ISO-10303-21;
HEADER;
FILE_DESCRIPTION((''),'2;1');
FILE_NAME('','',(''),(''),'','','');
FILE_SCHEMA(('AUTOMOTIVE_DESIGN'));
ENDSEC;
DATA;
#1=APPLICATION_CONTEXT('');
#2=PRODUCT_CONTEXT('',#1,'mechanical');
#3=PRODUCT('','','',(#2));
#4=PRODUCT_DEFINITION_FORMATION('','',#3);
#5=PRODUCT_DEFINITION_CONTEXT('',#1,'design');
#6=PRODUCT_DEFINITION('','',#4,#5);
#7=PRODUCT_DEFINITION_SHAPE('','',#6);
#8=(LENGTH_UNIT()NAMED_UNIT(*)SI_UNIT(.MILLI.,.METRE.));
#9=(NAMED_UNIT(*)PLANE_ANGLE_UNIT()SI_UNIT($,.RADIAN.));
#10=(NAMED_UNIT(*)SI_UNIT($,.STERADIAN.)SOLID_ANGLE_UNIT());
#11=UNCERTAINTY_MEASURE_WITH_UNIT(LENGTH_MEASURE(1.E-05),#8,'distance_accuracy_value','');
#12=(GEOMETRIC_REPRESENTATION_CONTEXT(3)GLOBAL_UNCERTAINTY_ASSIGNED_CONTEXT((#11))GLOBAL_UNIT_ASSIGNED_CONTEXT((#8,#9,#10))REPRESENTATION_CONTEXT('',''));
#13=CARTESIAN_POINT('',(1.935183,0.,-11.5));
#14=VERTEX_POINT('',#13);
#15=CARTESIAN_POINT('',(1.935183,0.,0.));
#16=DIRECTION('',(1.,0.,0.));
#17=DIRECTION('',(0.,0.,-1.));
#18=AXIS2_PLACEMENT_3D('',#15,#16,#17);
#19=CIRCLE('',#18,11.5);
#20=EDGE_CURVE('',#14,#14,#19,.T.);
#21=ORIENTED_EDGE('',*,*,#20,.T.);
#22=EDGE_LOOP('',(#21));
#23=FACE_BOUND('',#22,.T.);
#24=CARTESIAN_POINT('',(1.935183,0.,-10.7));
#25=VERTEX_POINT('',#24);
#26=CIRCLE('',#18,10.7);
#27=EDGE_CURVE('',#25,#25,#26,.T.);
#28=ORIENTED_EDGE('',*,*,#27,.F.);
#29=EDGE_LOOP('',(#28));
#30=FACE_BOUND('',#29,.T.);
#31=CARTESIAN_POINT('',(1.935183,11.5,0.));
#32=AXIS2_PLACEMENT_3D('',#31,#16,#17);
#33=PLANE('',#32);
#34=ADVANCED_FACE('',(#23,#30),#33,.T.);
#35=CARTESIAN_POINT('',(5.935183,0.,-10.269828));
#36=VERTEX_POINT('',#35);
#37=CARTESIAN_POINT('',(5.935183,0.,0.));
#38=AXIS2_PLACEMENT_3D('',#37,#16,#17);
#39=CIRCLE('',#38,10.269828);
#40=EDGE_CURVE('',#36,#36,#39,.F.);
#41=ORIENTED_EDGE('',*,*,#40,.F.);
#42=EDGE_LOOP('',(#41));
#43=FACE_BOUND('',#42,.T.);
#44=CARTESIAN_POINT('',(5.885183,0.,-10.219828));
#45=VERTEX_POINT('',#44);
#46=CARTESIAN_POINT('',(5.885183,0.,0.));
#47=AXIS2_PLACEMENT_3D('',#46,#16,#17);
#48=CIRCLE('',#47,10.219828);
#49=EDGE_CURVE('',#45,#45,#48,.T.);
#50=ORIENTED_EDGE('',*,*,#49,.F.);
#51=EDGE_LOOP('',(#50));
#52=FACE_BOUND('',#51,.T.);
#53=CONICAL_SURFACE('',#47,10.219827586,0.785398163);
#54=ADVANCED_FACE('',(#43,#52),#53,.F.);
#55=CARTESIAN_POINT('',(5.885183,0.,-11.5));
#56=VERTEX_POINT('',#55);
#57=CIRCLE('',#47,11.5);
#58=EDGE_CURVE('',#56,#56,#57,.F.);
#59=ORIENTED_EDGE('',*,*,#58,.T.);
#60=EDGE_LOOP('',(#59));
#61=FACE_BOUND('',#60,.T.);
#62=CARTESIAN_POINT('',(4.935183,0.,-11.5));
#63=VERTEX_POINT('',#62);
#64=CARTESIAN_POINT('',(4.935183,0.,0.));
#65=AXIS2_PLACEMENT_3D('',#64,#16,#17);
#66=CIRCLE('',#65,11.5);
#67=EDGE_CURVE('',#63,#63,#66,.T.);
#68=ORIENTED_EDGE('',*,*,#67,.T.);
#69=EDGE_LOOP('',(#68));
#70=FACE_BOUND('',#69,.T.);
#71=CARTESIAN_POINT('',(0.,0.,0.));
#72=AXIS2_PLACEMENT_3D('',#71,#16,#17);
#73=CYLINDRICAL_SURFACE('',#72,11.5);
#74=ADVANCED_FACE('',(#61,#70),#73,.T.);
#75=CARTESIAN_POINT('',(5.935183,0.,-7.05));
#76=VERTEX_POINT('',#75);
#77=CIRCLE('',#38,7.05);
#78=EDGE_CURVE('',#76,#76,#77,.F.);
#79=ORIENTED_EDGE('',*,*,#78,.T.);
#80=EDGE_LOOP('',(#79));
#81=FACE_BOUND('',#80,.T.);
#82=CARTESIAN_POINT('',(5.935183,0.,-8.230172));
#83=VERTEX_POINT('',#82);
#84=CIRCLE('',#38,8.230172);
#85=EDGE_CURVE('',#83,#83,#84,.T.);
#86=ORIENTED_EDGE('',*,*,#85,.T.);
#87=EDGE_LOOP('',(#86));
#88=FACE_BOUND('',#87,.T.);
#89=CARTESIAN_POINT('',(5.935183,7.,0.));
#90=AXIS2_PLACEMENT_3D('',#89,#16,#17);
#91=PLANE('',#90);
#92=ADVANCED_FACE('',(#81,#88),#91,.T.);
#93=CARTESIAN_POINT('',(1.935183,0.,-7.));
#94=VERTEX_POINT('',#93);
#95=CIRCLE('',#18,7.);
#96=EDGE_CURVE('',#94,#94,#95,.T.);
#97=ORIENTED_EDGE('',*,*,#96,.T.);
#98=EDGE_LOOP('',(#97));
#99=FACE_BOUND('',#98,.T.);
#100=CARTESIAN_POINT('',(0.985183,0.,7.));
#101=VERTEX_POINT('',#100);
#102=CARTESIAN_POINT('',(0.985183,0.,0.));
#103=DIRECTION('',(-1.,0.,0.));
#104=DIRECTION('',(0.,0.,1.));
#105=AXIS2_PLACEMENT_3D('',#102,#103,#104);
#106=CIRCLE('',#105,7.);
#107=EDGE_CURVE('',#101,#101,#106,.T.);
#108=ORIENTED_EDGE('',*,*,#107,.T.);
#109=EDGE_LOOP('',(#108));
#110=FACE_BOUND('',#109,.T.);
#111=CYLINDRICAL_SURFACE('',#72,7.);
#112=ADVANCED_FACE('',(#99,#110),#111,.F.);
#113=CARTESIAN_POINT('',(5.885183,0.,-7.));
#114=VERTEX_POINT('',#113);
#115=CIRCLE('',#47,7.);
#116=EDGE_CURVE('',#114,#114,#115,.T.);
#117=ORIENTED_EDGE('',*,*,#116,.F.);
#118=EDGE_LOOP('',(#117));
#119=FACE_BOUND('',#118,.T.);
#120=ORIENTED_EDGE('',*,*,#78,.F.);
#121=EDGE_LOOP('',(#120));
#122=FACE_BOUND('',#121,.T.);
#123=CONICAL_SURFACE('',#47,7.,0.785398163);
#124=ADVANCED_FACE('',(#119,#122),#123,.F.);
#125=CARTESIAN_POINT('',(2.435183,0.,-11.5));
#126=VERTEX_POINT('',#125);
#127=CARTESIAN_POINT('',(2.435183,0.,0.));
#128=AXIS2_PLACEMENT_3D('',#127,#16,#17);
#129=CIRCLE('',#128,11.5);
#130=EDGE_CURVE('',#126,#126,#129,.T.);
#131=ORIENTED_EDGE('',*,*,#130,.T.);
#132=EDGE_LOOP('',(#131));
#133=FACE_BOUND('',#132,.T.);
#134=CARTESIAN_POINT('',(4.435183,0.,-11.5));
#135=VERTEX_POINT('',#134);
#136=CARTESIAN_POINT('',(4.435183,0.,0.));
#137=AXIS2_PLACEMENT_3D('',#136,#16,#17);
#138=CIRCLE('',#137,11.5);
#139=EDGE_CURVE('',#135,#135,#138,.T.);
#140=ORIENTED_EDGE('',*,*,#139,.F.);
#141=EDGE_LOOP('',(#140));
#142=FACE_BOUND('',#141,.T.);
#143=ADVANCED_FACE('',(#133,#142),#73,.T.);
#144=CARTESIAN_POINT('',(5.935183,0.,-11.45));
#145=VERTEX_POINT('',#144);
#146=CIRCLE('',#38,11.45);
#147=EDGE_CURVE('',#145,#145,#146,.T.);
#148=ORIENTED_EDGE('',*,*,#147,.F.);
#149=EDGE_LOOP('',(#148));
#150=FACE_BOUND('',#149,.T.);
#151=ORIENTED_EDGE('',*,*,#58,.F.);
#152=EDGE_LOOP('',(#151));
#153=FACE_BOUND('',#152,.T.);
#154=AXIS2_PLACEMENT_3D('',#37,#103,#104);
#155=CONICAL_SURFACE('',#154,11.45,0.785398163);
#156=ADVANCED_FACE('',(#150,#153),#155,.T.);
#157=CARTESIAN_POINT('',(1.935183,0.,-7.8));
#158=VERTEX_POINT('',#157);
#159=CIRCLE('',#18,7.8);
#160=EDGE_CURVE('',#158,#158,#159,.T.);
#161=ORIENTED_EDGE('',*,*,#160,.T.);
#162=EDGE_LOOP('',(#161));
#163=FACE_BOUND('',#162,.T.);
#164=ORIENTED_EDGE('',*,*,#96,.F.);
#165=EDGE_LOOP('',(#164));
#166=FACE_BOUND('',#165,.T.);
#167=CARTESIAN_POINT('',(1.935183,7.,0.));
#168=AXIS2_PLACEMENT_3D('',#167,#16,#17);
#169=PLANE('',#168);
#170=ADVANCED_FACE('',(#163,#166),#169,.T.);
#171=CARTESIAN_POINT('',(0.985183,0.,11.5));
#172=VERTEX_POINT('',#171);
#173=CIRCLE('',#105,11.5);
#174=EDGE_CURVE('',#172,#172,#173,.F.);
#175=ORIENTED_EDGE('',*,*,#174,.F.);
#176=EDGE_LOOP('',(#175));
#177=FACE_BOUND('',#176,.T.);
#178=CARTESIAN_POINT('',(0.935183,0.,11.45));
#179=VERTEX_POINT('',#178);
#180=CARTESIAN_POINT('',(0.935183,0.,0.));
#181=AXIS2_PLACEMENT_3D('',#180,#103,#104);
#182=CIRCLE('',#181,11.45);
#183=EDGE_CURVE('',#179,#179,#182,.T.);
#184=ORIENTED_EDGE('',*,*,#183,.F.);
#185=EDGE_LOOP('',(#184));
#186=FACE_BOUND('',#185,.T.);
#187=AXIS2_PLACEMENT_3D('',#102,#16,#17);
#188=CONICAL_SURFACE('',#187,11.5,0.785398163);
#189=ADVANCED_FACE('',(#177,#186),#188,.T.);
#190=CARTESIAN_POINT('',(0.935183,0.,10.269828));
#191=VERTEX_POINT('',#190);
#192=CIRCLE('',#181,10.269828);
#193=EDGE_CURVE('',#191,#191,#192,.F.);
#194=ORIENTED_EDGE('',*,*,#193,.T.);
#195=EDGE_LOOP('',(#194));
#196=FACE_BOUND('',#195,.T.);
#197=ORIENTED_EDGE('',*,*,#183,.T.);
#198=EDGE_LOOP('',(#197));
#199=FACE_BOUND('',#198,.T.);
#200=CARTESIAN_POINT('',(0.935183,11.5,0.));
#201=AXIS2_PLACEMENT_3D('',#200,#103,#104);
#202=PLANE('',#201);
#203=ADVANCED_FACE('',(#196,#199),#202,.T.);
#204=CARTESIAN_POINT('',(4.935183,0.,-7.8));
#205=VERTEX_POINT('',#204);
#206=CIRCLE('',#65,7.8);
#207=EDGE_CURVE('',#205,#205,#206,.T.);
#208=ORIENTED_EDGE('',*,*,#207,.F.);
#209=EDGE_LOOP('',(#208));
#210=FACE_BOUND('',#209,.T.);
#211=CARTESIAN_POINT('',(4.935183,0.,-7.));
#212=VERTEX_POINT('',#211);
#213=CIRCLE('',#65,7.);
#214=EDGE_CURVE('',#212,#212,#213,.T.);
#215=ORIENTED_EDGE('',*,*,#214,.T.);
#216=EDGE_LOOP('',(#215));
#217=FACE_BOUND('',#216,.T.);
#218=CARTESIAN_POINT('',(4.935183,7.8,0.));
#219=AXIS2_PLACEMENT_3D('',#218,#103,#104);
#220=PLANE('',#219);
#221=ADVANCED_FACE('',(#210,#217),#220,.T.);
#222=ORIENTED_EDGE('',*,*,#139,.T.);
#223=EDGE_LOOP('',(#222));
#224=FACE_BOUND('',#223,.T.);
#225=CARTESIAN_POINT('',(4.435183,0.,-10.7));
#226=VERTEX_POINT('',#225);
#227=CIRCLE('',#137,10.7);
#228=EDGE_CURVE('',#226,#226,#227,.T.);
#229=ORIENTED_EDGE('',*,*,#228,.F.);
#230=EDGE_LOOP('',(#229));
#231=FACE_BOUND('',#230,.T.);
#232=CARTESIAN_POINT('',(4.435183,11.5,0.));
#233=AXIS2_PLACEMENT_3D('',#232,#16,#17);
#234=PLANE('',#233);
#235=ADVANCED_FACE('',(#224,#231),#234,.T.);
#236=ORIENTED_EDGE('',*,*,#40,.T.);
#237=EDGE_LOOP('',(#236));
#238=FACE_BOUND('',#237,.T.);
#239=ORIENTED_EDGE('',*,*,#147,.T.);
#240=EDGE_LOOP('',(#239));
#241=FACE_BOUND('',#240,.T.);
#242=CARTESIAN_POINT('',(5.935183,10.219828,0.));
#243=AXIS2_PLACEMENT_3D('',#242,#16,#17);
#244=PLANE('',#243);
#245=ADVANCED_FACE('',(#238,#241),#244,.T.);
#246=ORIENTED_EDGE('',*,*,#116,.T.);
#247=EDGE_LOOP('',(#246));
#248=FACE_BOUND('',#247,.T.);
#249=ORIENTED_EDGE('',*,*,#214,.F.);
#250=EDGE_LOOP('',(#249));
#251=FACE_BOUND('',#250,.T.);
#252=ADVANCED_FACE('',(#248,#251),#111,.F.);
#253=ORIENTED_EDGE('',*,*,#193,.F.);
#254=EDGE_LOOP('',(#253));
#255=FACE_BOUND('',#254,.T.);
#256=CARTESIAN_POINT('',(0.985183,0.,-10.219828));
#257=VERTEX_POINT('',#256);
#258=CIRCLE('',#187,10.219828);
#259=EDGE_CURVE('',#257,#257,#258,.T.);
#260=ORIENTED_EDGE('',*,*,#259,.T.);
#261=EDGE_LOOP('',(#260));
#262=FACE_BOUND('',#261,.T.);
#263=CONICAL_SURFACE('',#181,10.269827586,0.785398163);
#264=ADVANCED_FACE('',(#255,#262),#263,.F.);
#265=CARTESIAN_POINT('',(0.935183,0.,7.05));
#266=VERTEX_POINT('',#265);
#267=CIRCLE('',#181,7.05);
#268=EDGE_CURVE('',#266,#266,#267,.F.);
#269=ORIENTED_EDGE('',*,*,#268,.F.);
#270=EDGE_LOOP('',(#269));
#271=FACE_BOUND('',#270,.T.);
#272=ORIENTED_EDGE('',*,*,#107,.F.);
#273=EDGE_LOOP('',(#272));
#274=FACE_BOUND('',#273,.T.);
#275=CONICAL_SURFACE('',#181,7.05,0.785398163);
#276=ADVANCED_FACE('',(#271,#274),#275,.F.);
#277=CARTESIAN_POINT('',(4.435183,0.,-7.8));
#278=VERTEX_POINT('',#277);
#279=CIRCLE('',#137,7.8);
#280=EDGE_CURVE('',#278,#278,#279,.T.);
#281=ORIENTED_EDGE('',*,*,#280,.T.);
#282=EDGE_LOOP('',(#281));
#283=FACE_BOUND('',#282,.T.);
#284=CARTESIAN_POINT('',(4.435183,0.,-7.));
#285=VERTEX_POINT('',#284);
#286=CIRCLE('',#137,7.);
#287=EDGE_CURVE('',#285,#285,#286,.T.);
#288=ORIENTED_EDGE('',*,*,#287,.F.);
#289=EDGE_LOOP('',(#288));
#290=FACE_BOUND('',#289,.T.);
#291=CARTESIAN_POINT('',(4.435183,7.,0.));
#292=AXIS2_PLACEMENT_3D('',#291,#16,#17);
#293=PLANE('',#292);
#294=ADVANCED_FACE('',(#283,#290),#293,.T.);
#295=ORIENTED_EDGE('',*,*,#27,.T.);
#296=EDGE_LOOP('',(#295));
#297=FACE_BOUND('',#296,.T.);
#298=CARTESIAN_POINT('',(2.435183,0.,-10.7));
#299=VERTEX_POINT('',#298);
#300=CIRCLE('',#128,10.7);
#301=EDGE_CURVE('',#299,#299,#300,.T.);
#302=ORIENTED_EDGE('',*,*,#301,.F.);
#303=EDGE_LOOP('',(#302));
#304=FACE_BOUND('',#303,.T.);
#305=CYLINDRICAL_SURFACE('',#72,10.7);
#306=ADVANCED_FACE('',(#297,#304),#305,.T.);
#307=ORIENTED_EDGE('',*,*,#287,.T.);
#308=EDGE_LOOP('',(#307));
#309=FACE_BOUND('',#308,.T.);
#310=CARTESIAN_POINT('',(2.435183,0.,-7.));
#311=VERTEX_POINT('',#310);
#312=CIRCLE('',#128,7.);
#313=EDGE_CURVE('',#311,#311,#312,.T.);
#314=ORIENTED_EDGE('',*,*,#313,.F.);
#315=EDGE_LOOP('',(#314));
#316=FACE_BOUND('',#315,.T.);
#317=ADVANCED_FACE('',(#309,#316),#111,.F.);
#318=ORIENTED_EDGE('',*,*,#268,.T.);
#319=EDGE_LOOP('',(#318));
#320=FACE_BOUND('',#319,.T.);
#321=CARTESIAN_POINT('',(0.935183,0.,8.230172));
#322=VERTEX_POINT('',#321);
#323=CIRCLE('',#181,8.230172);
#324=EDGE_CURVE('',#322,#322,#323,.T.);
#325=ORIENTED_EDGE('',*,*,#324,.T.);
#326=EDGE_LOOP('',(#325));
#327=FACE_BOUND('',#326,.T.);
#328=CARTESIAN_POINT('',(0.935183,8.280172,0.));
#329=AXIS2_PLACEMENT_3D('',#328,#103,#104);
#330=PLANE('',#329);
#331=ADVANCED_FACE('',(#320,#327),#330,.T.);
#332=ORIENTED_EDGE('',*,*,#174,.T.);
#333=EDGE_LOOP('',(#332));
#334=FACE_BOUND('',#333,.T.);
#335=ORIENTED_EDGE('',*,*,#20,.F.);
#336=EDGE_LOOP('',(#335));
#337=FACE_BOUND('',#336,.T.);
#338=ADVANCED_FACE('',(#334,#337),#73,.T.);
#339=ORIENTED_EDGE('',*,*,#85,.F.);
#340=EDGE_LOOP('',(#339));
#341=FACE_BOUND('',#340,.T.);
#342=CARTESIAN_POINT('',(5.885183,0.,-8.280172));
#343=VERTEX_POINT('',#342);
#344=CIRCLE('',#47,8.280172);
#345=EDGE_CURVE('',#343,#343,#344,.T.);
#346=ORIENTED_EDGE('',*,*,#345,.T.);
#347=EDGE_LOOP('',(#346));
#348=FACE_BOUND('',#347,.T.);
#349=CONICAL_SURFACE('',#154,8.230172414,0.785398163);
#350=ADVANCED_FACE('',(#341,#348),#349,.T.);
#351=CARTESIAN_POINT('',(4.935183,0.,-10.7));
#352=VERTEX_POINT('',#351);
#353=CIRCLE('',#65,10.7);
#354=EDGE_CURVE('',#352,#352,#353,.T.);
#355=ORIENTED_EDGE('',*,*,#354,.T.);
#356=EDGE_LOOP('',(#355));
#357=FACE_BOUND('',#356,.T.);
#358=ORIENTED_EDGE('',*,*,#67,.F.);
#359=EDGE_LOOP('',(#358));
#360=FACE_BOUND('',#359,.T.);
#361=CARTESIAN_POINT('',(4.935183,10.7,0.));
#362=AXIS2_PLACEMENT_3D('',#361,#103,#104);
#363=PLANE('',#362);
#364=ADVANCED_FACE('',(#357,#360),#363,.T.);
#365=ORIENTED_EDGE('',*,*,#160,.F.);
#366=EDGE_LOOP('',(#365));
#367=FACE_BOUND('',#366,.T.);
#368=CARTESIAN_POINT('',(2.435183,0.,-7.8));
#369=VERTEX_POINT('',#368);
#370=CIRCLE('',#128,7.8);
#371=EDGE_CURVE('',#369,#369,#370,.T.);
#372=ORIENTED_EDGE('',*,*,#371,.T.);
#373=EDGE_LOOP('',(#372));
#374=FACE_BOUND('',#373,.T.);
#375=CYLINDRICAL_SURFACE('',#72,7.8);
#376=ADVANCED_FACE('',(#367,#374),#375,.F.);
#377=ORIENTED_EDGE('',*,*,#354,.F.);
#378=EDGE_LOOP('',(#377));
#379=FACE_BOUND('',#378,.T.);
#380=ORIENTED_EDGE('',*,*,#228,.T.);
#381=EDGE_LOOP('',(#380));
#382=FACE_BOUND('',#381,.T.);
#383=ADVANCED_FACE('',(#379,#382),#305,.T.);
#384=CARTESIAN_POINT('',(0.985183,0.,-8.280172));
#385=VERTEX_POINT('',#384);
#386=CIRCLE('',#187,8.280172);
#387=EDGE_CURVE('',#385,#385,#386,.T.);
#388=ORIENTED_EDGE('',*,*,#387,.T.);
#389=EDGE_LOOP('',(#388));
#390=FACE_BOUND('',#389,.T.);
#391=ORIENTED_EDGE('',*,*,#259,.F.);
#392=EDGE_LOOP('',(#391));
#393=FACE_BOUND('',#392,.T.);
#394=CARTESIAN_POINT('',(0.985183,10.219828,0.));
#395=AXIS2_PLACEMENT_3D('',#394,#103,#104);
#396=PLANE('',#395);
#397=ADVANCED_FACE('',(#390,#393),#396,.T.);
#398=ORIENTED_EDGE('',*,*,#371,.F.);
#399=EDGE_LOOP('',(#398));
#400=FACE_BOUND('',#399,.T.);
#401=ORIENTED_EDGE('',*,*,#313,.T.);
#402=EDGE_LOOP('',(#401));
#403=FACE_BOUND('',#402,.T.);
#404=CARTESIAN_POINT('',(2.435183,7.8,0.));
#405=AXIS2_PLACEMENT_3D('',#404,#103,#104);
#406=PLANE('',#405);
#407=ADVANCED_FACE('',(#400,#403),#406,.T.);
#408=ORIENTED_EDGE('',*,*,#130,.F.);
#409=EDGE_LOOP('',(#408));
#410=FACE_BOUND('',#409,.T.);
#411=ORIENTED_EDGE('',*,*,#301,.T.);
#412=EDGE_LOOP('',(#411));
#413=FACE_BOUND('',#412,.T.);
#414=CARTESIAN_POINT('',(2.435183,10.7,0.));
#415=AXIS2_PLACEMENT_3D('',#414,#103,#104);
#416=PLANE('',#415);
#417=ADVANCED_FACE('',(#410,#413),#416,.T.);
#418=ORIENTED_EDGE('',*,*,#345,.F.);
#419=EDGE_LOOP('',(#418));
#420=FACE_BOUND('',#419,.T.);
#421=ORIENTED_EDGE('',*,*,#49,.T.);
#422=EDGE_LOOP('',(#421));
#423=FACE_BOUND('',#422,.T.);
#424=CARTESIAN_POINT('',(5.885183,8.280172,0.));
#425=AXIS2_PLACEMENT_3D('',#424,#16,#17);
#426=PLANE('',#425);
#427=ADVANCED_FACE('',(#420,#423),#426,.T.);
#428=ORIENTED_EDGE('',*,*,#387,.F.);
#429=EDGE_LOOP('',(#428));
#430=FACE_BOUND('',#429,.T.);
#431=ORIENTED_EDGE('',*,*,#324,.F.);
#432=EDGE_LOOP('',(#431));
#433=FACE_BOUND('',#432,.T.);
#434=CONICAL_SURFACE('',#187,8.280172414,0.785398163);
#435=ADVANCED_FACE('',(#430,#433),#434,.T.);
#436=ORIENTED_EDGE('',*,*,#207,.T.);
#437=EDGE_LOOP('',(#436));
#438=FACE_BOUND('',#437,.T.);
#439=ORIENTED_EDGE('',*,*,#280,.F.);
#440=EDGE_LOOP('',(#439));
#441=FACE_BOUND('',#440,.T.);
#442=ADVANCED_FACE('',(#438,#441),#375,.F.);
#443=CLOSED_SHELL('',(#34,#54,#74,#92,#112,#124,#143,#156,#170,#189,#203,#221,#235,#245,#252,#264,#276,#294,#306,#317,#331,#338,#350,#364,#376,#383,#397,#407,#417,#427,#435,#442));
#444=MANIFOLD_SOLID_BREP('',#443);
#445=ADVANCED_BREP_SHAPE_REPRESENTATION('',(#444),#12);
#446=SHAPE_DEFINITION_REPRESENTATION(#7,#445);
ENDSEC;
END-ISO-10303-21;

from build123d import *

# Parameters (mm, degrees)
SMUSSO1_SIZE = 0.05


with BuildPart() as part:
    # Schizzo1 → Rivoluzione1 (revolve)
    with BuildSketch(Plane.XY, mode=Mode.PRIVATE) as rivoluzione1_sk:
        Polygon((0.935183111, 7), (1.935183111, 7), (1.935183111, 7.8), (2.435183111, 7.8), (2.435183111, 7), (4.435183111, 7), (4.435183111, 7.8), (4.935183111, 7.8), (4.935183111, 7), (5.935183111, 7), (5.935183111, 8.280172414), (5.885183111, 8.280172414), (5.885183111, 10.219827586), (5.935183111, 10.219827586), (5.935183111, 11.5), (4.935183111, 11.5), (4.935183111, 10.7), (4.435183111, 10.7), (4.435183111, 11.5), (2.435183111, 11.5), (2.435183111, 10.7), (1.935183111, 10.7), (1.935183111, 11.5), (0.935183111, 11.5), (0.935183111, 10.219827586), (0.985183111, 10.219827586), (0.985183111, 8.280172414), (0.935183111, 8.280172414), align=None)
    revolve(rivoluzione1_sk.sketch.rotate(Axis((0, 0, 0), (-1, 0, 0)), 90), axis=Axis((0, 0, 0), (-1, 0, 0)))

    # Smusso1
    smusso1_edges = [part.edges().sort_by_distance(p)[0] for p in [
        (0.935183111, 0, 8.280172414),
        (0.935183111, 0, 10.219827586),
        (0.935183111, 0, 11.5),
        (5.935183111, 0, 11.5),
        (5.935183111, 0, 10.219827586),
        (5.935183111, 0, 8.280172414),
        (5.935183111, 0, 7),
        (0.935183111, 0, 7),
    ]]
    chamfer(smusso1_edges, length=SMUSSO1_SIZE - 0.0001)  # a hair under: the kernel refuses the full size


solid = part.part
